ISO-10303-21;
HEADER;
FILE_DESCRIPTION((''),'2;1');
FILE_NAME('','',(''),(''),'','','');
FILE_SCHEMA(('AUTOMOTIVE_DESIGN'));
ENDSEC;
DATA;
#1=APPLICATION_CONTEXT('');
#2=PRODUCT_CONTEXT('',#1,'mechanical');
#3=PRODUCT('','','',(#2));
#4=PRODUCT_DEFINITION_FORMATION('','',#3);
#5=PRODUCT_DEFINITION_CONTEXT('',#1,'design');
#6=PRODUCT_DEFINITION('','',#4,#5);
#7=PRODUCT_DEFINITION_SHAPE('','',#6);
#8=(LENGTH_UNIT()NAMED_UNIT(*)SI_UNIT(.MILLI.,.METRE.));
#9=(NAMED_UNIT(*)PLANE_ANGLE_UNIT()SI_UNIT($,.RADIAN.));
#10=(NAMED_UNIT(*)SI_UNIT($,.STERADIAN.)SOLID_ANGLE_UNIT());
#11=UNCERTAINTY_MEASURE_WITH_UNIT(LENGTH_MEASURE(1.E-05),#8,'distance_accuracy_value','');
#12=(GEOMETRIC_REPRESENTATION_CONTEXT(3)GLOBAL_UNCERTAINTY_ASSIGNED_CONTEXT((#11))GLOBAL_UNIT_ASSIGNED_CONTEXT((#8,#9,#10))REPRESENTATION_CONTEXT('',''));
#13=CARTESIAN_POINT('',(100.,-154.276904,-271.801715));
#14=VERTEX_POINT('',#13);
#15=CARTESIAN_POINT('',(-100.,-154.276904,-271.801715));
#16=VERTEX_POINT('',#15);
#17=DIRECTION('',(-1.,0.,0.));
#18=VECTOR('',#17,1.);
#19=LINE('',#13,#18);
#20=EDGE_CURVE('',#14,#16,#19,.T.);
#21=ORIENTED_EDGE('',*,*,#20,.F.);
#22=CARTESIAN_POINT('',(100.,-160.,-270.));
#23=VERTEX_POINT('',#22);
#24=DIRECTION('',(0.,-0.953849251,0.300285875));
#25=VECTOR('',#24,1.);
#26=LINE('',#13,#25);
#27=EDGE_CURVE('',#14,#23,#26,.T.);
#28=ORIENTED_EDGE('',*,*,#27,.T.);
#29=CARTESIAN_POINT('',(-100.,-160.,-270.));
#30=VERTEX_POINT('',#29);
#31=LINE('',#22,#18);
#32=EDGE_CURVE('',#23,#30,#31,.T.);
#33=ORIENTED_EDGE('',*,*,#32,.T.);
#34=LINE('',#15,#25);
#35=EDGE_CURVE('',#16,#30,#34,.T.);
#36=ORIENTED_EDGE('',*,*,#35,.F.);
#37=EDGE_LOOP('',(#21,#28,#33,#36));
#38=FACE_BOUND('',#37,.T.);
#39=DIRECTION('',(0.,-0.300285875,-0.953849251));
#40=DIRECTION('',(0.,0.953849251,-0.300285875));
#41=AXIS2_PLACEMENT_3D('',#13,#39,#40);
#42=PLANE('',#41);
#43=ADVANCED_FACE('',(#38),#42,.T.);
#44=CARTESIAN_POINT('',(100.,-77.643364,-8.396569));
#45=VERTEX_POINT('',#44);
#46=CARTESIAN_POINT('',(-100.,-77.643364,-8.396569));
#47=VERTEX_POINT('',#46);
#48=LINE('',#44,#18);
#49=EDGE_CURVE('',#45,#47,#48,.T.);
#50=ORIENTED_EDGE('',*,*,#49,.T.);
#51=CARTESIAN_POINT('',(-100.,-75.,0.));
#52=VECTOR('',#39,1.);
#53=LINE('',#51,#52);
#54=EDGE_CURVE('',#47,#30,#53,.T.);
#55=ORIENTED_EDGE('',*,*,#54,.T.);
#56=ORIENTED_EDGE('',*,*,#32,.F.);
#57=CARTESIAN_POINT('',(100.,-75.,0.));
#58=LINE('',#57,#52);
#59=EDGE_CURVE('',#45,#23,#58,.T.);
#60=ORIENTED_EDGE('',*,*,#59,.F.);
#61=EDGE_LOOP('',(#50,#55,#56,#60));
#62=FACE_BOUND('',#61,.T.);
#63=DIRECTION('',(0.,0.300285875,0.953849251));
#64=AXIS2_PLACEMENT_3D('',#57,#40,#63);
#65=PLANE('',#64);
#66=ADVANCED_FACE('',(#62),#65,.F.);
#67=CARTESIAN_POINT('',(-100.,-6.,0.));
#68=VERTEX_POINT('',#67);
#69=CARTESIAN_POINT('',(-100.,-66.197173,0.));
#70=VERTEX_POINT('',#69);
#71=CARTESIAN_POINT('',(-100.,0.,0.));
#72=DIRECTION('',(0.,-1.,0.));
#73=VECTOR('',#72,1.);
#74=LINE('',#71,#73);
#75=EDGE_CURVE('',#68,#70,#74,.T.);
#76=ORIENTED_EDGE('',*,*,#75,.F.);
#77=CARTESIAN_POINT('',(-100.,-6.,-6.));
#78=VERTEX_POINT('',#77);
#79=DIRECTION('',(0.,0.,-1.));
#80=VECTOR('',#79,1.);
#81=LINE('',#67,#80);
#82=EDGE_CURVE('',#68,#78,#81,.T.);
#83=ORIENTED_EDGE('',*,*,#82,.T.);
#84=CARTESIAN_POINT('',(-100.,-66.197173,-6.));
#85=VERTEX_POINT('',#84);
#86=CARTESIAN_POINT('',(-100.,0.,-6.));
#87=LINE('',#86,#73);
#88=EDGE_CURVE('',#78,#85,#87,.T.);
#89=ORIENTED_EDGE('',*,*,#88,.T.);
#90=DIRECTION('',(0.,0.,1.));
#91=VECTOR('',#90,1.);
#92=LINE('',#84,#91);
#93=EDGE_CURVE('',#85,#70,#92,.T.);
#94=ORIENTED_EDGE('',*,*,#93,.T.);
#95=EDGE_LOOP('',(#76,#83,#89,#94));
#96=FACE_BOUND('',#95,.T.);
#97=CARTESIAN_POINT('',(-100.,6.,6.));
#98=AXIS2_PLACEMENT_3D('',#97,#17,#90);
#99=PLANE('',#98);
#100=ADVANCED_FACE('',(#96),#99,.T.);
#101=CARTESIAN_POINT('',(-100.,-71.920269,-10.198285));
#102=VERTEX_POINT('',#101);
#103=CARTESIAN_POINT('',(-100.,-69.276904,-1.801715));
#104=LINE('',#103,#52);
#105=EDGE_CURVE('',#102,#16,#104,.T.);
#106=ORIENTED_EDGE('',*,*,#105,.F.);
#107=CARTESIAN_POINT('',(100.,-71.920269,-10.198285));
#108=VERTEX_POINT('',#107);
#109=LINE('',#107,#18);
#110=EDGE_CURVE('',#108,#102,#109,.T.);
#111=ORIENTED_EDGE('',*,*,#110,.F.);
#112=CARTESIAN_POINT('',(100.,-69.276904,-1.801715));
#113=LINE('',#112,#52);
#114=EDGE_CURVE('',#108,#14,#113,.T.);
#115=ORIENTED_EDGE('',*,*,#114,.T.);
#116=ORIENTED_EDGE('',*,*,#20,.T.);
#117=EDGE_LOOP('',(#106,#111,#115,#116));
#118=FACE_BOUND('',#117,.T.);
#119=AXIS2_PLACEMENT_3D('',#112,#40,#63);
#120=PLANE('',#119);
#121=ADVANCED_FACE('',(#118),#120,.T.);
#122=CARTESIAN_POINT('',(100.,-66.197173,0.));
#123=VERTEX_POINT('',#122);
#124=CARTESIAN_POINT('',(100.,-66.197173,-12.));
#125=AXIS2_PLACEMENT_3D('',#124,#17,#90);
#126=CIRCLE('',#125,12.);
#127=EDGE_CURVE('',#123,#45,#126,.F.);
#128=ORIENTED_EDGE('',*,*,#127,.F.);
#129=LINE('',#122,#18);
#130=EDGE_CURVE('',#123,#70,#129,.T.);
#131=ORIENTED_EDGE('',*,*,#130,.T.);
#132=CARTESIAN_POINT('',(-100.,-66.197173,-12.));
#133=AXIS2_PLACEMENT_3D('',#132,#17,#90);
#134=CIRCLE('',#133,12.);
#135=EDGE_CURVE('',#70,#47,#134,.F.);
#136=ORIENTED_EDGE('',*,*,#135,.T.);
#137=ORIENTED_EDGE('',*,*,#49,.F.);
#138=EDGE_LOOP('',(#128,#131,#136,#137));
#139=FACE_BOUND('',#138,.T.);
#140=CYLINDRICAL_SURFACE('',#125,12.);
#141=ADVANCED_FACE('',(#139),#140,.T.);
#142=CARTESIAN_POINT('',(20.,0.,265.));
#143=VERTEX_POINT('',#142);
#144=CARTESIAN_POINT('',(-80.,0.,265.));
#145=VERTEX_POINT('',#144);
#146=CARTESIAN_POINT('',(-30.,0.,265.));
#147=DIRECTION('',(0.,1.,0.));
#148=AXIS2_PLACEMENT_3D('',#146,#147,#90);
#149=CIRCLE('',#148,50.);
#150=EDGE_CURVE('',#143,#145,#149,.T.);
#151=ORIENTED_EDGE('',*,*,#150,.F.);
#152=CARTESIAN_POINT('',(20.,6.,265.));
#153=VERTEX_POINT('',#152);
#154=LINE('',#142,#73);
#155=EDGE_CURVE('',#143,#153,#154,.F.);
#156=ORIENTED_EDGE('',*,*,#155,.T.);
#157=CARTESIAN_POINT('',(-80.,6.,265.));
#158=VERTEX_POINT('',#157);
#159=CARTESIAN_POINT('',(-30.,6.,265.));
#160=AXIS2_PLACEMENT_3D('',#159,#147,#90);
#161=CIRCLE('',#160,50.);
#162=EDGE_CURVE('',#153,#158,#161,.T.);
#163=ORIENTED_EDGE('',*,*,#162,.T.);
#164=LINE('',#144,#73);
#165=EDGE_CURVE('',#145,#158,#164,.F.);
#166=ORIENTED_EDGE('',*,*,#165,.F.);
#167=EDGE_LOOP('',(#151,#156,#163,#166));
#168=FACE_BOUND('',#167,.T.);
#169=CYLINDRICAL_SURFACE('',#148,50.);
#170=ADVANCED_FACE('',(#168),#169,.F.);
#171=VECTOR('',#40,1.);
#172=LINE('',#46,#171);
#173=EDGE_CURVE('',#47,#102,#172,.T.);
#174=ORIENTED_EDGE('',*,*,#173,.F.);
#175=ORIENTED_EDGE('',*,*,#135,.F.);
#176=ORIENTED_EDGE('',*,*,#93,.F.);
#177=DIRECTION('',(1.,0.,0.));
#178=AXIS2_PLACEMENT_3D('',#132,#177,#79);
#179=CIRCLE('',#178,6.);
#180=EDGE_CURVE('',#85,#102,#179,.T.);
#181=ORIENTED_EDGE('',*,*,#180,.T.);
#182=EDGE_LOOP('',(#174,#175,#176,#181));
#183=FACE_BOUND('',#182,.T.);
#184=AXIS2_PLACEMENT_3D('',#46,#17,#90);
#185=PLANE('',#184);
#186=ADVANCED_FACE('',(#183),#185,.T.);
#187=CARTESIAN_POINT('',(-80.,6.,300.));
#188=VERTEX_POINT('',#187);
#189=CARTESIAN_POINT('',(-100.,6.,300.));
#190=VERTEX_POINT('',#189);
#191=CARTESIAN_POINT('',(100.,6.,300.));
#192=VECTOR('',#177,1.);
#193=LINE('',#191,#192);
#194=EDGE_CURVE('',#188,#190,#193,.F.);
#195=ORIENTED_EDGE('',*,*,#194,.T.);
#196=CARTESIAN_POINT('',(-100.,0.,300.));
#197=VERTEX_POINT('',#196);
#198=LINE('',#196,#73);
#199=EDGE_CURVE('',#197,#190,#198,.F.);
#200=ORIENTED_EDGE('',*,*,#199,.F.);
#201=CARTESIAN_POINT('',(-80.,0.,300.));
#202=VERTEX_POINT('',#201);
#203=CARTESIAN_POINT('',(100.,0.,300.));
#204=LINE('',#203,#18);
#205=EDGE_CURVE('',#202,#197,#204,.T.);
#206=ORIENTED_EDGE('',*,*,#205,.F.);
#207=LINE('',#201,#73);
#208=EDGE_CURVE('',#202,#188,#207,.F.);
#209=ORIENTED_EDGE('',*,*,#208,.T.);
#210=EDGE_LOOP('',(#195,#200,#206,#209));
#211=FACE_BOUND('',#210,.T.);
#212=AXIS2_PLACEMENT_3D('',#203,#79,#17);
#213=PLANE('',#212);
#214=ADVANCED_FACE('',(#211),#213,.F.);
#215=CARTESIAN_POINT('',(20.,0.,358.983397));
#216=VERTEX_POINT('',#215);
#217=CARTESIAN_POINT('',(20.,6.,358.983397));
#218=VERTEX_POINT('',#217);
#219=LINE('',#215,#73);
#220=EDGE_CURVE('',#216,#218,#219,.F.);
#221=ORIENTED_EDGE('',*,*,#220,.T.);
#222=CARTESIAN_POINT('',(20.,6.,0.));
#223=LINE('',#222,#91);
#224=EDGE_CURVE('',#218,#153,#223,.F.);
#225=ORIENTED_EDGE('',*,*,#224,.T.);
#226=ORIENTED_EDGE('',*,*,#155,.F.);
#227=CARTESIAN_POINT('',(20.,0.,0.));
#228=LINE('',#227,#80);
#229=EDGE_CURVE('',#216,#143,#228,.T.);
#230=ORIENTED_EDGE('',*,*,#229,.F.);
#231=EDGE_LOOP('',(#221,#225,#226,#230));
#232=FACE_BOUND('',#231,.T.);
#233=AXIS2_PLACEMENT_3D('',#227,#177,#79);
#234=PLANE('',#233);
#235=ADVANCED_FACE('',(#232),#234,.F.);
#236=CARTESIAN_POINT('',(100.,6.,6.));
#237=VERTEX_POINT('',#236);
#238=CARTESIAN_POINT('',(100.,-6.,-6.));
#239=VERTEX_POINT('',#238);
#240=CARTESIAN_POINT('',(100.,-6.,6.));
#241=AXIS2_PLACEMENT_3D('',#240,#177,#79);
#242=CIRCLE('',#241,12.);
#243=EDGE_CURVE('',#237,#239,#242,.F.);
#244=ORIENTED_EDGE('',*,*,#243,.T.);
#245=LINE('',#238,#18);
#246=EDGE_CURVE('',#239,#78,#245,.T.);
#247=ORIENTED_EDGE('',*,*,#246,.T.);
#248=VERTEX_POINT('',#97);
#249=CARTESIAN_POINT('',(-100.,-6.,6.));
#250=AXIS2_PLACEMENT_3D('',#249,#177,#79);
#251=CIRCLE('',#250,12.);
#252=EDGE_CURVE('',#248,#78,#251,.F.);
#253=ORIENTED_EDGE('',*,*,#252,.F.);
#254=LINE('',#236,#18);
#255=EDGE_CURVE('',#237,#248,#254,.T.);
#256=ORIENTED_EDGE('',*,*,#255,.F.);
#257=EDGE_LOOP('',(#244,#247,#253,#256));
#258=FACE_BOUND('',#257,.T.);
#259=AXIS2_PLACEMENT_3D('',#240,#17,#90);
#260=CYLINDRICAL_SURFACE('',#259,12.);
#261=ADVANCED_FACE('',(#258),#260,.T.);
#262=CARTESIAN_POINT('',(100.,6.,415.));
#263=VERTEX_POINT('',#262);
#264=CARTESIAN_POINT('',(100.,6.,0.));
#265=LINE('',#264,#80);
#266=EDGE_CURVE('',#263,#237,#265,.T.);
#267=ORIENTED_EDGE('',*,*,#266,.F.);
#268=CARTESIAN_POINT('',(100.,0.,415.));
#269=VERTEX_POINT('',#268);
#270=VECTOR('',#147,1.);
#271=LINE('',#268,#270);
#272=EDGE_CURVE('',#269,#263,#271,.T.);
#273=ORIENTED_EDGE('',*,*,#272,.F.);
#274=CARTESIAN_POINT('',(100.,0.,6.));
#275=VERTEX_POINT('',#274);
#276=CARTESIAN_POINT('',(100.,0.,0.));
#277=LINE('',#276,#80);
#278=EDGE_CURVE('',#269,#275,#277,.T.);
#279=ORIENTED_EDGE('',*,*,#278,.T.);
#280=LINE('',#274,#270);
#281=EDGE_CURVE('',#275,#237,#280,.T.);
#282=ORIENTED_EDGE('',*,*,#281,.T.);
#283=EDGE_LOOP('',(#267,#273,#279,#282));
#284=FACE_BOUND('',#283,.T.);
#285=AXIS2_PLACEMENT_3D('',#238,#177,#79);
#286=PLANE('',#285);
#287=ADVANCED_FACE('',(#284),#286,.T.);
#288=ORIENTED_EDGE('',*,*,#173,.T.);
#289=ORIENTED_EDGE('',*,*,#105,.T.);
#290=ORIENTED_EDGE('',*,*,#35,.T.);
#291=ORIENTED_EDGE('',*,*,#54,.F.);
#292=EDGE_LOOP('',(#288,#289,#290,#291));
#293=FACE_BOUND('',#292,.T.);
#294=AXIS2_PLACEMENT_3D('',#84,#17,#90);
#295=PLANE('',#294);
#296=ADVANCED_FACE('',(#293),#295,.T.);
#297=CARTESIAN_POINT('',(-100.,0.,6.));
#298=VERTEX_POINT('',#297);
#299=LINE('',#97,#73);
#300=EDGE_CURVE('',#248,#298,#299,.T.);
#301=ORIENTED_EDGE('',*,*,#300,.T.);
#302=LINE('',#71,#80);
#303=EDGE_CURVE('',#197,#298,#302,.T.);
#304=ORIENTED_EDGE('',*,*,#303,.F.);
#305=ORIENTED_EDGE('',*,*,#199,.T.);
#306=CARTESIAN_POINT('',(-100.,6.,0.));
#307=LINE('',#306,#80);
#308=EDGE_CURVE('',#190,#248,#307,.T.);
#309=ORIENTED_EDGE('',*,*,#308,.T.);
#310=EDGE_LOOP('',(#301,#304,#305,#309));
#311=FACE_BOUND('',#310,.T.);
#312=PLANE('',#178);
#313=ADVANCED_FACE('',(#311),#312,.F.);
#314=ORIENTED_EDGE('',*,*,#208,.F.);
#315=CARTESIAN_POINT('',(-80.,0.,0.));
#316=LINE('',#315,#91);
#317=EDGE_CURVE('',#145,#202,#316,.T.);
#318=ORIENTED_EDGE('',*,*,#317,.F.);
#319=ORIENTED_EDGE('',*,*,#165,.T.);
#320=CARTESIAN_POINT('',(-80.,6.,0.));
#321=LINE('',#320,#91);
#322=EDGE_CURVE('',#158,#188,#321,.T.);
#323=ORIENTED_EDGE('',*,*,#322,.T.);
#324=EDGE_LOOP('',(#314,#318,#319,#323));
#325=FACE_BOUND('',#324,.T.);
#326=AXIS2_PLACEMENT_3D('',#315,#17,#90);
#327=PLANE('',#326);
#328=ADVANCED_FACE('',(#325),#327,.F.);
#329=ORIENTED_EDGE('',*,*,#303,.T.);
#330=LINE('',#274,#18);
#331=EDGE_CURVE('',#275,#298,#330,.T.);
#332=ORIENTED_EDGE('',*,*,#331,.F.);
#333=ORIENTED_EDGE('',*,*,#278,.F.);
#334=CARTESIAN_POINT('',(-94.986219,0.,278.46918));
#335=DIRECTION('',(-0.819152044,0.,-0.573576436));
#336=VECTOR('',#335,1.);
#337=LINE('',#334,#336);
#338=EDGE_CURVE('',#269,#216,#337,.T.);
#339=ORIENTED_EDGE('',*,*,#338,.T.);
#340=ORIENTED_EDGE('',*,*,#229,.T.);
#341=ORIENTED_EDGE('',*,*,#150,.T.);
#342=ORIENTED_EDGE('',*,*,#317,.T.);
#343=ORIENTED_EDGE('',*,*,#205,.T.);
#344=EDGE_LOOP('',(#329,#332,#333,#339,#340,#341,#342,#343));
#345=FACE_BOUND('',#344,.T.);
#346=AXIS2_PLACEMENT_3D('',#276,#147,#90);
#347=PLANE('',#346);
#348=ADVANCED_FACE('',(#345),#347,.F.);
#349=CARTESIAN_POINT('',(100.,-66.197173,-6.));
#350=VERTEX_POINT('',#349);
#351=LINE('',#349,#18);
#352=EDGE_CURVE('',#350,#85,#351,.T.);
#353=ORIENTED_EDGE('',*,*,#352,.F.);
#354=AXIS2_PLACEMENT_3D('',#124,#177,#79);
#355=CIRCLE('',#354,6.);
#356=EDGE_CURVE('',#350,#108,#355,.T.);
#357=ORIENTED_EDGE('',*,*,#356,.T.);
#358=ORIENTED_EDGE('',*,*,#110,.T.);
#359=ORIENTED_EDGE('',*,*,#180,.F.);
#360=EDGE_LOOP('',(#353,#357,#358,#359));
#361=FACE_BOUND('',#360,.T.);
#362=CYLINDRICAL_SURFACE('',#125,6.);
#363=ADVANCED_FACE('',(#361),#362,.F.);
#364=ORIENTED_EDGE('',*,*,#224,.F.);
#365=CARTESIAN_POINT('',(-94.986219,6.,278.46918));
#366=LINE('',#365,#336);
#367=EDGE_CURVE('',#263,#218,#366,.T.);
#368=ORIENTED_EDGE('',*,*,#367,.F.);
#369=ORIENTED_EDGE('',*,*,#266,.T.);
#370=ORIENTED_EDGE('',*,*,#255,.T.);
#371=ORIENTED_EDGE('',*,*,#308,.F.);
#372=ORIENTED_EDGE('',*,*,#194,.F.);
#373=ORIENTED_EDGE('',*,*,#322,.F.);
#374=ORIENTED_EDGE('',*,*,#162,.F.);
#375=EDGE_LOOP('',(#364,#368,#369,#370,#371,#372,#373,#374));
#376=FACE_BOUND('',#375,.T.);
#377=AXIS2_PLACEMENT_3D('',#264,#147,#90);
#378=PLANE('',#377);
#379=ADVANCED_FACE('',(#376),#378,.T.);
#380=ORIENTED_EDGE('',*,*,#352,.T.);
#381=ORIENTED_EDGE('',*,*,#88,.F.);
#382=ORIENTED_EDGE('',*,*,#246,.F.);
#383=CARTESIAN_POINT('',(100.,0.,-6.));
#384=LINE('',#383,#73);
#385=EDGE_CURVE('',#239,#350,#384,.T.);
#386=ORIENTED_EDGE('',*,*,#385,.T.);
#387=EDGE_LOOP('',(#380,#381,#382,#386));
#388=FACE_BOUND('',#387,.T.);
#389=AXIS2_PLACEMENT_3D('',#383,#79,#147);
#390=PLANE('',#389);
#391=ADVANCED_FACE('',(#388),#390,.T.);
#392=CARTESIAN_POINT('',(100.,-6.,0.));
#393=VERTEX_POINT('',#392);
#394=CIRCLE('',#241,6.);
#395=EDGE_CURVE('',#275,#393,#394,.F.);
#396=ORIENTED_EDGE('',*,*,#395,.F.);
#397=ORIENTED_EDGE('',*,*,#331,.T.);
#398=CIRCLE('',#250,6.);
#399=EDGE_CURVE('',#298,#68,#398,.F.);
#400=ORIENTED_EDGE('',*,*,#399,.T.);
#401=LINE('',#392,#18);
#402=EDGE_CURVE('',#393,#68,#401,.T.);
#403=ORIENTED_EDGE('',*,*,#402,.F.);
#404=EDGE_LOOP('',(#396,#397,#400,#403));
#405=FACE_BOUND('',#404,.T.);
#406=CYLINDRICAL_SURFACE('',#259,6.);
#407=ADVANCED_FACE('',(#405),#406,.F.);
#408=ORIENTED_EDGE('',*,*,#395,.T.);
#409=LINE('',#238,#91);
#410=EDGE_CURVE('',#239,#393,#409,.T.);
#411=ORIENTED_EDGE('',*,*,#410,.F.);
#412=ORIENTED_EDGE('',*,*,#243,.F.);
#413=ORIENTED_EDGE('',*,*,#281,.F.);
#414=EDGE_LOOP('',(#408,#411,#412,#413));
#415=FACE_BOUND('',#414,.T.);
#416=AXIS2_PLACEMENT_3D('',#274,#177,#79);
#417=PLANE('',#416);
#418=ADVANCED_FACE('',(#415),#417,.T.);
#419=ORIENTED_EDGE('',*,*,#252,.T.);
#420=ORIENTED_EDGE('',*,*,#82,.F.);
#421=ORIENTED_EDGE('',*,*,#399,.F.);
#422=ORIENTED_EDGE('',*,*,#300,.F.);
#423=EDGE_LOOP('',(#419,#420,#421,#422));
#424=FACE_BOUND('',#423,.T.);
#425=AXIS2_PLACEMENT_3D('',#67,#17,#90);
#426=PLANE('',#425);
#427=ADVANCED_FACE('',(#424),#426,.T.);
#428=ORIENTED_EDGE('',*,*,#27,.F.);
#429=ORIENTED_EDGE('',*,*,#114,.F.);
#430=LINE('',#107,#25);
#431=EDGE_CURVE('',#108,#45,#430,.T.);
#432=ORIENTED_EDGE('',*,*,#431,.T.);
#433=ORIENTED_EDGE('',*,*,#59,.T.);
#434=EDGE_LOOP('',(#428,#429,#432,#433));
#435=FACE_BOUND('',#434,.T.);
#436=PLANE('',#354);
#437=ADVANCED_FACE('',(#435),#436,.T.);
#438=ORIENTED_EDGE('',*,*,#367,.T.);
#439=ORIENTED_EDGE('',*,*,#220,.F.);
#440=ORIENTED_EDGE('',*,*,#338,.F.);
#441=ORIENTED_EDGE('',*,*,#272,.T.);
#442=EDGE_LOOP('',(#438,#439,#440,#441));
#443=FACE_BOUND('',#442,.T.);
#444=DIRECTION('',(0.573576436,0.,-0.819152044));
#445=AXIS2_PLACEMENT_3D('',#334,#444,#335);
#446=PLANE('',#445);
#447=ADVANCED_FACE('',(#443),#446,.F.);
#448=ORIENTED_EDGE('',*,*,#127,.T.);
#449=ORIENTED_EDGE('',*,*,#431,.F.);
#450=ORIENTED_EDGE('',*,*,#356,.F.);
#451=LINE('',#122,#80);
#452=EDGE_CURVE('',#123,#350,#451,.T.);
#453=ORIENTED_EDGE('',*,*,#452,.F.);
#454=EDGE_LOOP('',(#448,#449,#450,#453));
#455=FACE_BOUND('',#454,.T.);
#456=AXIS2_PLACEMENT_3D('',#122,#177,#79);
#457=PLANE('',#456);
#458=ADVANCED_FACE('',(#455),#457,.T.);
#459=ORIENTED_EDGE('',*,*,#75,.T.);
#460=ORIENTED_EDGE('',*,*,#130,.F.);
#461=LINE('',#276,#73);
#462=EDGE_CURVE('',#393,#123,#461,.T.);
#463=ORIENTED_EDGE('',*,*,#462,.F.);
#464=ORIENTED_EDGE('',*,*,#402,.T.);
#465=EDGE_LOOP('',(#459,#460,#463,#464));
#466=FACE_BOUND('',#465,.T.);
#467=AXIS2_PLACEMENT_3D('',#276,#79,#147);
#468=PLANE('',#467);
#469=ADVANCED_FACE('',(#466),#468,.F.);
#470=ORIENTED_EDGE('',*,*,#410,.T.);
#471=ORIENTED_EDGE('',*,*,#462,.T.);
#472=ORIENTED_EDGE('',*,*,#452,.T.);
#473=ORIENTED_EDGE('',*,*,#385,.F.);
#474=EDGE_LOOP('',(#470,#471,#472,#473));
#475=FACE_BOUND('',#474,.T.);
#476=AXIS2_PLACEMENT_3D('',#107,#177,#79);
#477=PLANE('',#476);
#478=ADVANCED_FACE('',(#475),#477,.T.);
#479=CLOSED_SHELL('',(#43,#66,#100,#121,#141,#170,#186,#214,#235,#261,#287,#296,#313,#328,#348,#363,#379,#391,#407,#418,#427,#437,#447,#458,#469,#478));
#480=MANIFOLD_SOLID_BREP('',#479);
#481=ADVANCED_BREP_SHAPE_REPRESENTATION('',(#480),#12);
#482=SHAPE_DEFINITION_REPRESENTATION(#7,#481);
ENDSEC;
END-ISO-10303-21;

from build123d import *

# Parameters (mm, degrees)
SM_BASE_FLANGE_1_DEPTH = 100
CUT_EXTRUDE_1_DEPTH    = 459.018558576


# Sheet-metal steps are written as plain solids
with BuildPart() as part:
    # Sketch 1 → 基体-法兰1 (new, symmetric)
    with BuildSketch(Plane(origin=(0, 0, 0), x_dir=(0, 0, -1), z_dir=(1, 0, 0))):
        with BuildLine():
            Line((270, -160), (8.396569497, -77.643364471))
            ThreePointArc((8.396569497, -77.643364471), (2.324227007, -73.295019402), (0, -66.197173462))
            Line((0, -66.197173462), (0, -6))
            ThreePointArc((0, -6), (-1.757359313, -1.757359313), (-6, 0))
            Line((-6, 0), (-415, 0))
            Line((-415, 0), (-415, 6))
            Line((-415, 6), (-6, 6))
            ThreePointArc((-6, 6), (2.485281374, 2.485281374), (6, -6))
            Line((6, -6), (6, -66.197173462))
            ThreePointArc((6, -66.197173462), (7.162113503, -69.746096432), (10.198284749, -71.920268967))
            Line((10.198284749, -71.920268967), (271.801715251, -154.276904496))
            Line((271.801715251, -154.276904496), (270, -160))
        make_face()
    extrude(amount=SM_BASE_FLANGE_1_DEPTH, both=True)

    # 草图4 → 切除-拉伸1 (cut, through all)
    with BuildSketch(Plane(origin=(0, 6, 0), x_dir=(1, 0, 0), z_dir=(0, 1, 0))):
        with BuildLine():
            Line((100, -415), (20, -358.983396943))
            Line((20, -358.983396943), (20, -265))
            ThreePointArc((20, -265), (-30, -215), (-80, -265))
            Line((-80, -265), (-80, -300))
            Line((-80, -300), (-100, -300))
            Line((-100, -300), (-100, -415))
            Line((-100, -415), (100, -415))
        make_face()
    extrude(amount=-CUT_EXTRUDE_1_DEPTH, mode=Mode.SUBTRACT)


solid = part.part
